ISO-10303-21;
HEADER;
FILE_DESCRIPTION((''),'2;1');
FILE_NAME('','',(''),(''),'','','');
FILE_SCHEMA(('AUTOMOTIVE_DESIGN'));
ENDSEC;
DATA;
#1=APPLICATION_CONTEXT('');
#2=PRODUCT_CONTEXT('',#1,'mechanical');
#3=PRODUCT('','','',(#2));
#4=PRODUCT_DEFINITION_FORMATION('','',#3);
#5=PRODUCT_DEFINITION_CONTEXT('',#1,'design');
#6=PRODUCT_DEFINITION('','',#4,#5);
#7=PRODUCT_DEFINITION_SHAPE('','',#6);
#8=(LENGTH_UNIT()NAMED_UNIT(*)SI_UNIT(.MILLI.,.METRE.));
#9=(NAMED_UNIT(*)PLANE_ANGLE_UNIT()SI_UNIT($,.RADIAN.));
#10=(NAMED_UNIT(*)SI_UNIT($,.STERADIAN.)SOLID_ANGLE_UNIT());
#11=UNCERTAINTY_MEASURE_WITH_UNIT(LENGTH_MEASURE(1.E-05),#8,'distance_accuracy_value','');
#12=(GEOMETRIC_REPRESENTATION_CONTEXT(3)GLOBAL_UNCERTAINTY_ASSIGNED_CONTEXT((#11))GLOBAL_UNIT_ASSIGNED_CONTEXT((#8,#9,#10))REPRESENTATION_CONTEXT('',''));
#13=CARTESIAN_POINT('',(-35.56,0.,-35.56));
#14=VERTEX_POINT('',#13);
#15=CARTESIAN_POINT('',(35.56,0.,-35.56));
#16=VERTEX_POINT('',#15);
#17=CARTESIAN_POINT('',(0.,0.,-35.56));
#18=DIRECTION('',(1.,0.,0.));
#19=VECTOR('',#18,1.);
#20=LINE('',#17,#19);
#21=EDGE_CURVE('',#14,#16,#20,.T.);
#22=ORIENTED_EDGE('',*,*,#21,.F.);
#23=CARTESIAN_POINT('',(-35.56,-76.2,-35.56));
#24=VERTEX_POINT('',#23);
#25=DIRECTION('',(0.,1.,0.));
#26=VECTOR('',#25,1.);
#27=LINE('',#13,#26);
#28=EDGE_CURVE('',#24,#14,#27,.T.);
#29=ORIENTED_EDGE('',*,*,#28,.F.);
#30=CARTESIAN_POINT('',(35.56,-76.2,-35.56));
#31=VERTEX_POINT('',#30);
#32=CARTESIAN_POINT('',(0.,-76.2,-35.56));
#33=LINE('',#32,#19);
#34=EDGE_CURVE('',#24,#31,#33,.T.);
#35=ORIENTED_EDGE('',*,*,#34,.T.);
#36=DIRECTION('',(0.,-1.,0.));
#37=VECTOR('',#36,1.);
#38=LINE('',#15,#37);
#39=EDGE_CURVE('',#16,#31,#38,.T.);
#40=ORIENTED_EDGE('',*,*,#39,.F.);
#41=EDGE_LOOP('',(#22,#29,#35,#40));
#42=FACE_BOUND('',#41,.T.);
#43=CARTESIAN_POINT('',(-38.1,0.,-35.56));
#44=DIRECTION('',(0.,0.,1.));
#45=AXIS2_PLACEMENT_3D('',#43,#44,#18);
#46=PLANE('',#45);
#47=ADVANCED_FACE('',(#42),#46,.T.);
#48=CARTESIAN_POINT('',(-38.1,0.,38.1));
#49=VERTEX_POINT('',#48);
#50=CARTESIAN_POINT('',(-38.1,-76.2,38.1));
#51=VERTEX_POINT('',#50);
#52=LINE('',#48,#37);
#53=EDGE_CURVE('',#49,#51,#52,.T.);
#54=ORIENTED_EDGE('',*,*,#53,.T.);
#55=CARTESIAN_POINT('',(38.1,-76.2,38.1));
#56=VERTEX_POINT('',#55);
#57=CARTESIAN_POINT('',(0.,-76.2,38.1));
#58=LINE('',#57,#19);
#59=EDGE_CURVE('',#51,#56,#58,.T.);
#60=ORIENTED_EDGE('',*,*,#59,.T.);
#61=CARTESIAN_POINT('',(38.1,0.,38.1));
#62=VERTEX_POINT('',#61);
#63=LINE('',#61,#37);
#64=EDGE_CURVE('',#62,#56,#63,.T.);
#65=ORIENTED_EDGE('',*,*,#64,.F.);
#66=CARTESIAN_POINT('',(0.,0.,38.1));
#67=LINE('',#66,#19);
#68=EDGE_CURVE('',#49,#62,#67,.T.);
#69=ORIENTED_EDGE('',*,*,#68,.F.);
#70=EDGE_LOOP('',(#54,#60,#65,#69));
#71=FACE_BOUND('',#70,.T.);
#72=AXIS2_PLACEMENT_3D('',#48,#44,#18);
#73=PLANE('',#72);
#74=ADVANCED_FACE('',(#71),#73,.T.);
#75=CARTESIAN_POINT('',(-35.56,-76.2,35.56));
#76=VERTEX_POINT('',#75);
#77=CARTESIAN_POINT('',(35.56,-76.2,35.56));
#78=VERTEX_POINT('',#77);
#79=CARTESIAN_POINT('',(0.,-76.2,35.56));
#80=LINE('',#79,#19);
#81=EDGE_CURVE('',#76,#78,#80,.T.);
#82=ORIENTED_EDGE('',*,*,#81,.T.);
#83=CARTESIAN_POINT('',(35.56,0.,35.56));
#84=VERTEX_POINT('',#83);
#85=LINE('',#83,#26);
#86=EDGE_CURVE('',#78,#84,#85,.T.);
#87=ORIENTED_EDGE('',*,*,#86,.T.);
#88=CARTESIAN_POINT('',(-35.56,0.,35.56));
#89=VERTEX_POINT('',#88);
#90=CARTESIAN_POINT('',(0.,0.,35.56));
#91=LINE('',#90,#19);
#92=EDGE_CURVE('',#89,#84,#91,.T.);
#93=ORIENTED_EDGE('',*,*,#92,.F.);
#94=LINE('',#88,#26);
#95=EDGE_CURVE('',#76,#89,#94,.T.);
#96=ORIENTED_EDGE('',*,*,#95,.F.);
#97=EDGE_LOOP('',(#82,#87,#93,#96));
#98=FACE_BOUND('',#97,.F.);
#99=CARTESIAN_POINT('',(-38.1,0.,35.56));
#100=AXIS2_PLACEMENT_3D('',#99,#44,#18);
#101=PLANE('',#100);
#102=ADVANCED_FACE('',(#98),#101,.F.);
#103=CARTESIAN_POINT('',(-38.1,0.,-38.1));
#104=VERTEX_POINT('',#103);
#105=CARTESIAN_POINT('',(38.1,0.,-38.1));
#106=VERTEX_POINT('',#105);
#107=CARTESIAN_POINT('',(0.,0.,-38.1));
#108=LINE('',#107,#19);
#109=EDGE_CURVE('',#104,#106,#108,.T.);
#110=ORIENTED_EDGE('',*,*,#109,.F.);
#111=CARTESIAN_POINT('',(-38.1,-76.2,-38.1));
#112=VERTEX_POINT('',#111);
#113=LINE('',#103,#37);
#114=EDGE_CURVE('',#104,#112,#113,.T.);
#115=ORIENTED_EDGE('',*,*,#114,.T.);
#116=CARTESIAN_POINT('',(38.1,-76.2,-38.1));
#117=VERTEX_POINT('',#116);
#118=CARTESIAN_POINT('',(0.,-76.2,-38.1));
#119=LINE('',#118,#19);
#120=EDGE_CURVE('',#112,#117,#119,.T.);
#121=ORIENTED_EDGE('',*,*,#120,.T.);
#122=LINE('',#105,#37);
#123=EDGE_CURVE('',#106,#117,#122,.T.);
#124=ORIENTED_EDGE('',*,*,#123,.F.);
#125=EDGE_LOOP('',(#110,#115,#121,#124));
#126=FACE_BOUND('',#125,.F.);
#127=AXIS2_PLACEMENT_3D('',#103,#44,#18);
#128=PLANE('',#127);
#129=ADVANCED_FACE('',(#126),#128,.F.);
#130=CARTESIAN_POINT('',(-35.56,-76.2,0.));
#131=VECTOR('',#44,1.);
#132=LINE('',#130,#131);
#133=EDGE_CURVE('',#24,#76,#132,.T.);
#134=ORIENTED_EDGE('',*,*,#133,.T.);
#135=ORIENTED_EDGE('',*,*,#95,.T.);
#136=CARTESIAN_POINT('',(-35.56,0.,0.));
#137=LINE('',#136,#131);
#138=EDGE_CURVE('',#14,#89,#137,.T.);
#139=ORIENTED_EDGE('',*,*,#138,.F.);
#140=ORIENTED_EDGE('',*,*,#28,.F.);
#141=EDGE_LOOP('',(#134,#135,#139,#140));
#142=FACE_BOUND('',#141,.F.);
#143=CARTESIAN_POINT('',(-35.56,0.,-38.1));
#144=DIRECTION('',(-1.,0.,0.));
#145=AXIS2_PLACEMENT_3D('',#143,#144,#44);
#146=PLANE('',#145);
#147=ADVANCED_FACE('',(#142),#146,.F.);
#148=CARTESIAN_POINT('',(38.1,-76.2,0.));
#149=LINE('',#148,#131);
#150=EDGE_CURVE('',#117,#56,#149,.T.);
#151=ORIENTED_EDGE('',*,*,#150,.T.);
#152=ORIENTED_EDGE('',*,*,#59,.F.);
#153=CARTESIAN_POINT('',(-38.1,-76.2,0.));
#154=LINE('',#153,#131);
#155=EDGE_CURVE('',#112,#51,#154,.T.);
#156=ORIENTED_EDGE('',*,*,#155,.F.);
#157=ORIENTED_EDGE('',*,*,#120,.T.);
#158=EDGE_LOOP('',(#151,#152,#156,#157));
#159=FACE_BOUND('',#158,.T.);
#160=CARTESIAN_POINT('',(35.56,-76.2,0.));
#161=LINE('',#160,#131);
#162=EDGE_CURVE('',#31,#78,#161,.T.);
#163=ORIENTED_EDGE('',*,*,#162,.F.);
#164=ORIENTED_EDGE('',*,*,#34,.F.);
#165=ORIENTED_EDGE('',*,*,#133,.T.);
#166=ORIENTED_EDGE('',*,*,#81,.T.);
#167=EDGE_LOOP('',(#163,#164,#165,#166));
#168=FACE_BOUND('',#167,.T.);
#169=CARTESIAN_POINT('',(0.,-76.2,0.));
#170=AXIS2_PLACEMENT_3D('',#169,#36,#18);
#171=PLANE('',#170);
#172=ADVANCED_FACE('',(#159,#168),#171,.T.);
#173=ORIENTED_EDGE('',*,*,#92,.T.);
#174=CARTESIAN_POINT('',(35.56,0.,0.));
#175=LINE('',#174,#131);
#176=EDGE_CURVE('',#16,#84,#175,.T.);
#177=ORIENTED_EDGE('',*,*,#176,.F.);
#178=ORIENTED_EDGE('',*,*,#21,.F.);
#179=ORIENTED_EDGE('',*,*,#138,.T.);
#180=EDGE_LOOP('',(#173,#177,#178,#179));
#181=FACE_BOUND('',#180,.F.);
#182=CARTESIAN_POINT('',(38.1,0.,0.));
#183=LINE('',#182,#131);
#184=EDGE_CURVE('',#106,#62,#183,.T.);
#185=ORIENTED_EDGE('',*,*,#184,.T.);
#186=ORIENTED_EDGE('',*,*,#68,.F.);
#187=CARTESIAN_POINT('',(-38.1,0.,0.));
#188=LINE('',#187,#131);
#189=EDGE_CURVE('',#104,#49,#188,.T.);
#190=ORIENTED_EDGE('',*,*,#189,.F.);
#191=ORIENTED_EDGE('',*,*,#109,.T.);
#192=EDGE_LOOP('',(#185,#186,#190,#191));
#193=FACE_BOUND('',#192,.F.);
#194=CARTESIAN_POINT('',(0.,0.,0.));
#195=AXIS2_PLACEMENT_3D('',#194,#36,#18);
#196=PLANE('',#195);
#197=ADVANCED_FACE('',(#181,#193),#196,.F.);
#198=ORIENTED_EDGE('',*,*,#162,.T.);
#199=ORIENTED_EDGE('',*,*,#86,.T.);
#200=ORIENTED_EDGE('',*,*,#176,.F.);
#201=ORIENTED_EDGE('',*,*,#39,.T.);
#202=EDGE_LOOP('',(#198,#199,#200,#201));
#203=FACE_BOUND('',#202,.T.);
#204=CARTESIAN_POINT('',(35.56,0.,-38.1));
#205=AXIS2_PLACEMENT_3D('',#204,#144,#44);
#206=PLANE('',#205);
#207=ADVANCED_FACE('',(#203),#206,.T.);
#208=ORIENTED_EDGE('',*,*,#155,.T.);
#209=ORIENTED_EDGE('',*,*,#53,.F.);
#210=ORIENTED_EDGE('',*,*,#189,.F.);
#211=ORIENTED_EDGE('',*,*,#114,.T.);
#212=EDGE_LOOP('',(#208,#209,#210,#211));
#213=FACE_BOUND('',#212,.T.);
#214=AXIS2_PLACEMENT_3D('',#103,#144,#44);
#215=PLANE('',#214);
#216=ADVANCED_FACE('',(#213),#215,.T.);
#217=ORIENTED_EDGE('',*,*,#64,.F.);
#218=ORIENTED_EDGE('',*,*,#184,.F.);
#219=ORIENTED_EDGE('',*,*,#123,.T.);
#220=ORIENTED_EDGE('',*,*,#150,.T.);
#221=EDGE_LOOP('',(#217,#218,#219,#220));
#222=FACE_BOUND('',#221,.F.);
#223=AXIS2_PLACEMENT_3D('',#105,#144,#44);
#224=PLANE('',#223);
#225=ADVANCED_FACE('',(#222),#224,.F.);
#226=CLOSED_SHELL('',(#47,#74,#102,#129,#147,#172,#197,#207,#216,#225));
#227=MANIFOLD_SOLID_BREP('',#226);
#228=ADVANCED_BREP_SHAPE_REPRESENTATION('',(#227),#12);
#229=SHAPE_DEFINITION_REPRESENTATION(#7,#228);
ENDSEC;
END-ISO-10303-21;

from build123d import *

# Parameters (mm, degrees)
F1_W     = 76.2
F1_H     = 76.2
F2_DEPTH = 76.2
F3_T     = -2.54


# Not quite as in the source:
# - a variable given as a bare number and used for a length is read in inches; the dataset says mm whatever the document's units were


with BuildPart() as f2:
    # F1 (on Front) → F2 (new body)
    with BuildSketch(Plane.XZ):
        Rectangle(F1_W, F1_H)
    extrude(amount=F2_DEPTH)

    # F3
    f3_openings = [f2.faces().sort_by_distance(p)[0] for p in [
        (0, -76.2, 0),
        (0, 0, 0),
    ]]
    offset(amount=F3_T, openings=f3_openings)


solid = f2.part
